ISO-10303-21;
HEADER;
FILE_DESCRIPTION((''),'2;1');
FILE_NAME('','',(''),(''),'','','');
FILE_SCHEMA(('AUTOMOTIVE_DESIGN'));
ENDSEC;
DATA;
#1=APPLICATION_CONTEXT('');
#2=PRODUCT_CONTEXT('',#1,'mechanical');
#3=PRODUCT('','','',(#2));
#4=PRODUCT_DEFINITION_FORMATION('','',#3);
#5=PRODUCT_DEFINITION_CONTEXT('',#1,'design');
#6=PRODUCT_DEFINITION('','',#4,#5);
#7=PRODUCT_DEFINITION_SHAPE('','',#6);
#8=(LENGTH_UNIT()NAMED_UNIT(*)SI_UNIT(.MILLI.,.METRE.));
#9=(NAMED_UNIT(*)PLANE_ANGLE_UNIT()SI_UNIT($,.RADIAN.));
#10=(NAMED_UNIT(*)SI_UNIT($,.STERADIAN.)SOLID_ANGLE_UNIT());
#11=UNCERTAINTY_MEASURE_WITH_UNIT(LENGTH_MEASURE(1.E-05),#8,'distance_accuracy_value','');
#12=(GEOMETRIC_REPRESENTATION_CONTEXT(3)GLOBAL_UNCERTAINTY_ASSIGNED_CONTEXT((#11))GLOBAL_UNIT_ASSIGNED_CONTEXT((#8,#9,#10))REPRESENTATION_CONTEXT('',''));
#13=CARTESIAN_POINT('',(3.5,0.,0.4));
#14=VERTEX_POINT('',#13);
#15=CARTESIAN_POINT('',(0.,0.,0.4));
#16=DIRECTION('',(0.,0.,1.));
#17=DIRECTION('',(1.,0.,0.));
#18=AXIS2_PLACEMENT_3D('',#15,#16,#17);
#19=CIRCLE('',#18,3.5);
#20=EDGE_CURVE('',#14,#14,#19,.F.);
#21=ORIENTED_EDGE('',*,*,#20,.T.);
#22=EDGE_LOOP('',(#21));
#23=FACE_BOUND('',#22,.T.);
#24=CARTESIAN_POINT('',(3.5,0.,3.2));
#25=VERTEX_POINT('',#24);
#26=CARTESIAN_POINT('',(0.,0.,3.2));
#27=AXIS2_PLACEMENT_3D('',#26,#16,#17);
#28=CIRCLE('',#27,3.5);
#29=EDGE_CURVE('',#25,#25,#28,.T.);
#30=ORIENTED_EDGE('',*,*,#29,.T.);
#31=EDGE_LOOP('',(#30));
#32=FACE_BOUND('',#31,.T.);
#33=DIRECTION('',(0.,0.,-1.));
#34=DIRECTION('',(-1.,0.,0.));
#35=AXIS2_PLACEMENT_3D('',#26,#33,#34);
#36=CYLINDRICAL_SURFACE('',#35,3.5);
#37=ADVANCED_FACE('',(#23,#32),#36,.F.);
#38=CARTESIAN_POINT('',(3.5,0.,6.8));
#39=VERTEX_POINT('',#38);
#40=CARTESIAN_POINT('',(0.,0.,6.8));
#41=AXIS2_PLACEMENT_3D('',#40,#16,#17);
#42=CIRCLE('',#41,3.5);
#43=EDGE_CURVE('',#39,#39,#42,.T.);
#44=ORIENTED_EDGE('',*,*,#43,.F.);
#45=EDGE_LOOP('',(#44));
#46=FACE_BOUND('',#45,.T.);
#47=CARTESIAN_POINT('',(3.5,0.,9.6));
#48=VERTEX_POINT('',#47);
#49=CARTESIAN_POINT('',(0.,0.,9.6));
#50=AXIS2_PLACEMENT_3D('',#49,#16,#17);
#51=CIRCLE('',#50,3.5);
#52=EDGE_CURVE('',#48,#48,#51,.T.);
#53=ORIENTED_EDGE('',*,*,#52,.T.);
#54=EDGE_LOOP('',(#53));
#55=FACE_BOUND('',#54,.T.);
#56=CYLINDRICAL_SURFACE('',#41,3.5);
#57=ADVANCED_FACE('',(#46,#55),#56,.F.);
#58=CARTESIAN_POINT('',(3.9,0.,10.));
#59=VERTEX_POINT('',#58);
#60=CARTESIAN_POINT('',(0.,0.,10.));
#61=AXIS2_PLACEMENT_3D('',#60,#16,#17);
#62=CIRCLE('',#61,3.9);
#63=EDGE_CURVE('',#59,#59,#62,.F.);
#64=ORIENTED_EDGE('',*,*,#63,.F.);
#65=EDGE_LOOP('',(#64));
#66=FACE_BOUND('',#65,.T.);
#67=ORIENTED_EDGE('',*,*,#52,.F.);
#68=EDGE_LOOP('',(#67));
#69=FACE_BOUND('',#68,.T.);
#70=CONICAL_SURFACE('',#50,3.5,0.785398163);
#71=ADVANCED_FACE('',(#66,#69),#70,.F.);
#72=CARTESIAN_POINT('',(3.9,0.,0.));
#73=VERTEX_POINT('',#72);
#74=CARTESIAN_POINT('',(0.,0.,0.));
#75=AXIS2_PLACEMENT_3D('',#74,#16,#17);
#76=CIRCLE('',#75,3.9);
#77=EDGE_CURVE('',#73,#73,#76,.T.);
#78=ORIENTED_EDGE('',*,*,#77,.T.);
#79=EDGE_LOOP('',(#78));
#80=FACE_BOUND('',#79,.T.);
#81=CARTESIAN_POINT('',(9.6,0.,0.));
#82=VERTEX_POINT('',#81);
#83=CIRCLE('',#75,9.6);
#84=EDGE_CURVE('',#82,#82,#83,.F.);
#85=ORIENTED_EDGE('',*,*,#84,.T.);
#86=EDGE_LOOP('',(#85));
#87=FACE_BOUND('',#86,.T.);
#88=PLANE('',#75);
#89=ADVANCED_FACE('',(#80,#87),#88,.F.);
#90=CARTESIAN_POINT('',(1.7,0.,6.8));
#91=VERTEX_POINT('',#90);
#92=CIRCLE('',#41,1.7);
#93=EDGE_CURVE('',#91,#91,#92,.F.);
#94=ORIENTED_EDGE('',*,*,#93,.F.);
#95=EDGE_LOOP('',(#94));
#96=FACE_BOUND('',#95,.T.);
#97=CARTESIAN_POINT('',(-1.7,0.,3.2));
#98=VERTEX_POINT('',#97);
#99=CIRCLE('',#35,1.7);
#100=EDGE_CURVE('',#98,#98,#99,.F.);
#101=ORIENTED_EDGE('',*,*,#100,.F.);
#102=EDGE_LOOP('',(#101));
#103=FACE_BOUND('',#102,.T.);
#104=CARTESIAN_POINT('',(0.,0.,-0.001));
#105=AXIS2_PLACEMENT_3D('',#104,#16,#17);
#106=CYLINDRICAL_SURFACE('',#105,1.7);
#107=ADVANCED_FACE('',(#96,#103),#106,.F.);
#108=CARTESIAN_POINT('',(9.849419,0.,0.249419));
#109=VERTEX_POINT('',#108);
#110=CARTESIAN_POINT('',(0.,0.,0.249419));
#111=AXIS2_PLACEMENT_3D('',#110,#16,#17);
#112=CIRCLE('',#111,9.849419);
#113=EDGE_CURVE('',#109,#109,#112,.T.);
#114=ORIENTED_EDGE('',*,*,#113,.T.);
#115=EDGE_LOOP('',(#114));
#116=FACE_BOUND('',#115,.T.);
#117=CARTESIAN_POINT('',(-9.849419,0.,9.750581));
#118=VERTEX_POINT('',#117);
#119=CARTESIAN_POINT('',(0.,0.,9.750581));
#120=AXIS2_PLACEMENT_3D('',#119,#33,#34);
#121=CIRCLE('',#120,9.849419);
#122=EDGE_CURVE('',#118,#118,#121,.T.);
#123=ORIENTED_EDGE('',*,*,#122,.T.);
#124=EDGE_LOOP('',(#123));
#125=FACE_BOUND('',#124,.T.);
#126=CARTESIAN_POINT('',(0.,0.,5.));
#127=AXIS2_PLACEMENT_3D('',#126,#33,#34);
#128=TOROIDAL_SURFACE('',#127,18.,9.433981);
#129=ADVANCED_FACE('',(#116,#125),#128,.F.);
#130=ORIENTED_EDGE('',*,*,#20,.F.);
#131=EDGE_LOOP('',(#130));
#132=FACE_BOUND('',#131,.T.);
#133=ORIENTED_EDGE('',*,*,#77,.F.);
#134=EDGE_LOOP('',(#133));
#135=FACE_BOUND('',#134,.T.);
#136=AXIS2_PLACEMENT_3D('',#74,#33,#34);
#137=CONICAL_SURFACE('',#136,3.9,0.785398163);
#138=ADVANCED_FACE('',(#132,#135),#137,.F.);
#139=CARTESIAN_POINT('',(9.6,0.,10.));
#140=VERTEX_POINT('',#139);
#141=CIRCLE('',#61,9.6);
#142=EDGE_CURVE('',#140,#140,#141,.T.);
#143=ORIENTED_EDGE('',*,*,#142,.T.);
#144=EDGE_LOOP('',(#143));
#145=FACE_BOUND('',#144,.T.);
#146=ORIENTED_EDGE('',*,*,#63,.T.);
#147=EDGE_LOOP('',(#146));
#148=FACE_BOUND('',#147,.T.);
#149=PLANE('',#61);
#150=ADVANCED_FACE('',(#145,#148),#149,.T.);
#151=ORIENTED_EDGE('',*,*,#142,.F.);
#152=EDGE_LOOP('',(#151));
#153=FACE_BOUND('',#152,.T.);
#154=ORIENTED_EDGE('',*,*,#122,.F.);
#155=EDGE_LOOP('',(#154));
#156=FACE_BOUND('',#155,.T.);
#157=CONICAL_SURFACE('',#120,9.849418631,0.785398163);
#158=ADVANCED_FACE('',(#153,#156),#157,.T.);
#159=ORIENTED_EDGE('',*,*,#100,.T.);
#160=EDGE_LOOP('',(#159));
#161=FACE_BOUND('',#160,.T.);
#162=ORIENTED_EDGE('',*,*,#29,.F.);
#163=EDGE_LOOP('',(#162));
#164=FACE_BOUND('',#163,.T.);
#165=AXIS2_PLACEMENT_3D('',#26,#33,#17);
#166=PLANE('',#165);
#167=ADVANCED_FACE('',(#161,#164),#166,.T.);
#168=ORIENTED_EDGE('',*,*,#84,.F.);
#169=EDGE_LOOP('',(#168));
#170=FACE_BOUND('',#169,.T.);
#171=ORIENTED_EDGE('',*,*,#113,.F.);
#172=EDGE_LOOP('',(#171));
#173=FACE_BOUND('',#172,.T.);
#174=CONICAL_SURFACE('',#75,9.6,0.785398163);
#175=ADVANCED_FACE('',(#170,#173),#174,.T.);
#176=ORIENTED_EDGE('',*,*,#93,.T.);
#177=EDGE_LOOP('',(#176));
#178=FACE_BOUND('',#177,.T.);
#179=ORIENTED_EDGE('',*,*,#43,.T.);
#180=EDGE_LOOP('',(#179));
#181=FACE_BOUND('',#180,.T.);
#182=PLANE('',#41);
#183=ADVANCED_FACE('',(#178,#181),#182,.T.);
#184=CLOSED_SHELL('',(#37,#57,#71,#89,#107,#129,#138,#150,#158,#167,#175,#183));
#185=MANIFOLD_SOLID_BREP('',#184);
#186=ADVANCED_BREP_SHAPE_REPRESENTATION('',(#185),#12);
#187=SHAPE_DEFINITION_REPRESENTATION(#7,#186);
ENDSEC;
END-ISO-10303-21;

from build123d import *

# Parameters (mm, degrees)
SKETCH1_R           = 10
BOSS_EXTRUDE1_DEPTH = 10
CUT_EXTRUDE1_REACH  = 19.321
SKETCH2_R           = 1.7
SKETCH3_R           = 3.5
CUT_EXTRUDE2_DEPTH  = 3.2
CHAMFER1_SIZE       = 0.4
CHAMFER2_SIZE       = 0.4


with BuildPart() as part:
    # Sketch1 → Boss-Extrude1 (new body)
    with BuildSketch(Plane.XY):
        Circle(SKETCH1_R)
    extrude(amount=BOSS_EXTRUDE1_DEPTH)

    # Sketch2 → Cut-Extrude1 (cut, up to next)
    with BuildSketch(Plane.XY.offset(10), mode=Mode.PRIVATE) as cut_extrude1_sk1:
        Circle(SKETCH2_R)
    cut_extrude1_tool1 = extrude(cut_extrude1_sk1.sketch, amount=-CUT_EXTRUDE1_REACH, mode=Mode.PRIVATE) & part.part
    add(cut_extrude1_tool1.solids().sort_by_distance((0, 0, 10))[0], mode=Mode.SUBTRACT)

    # Sketch3 → Cut-Extrude2 (cut)
    with BuildSketch(Plane.XY.offset(10)):
        Circle(SKETCH3_R)
    cut_extrude2 = extrude(amount=-CUT_EXTRUDE2_DEPTH, mode=Mode.SUBTRACT)

    # Mirror1: Cut-Extrude2 across plane
    add(cut_extrude2.mirror(Plane.XY.offset(5)), mode=Mode.SUBTRACT)

    # Sketch4 → Cut-Revolve1 (revolve, cut)
    with BuildSketch(Plane(origin=(0, 0, 0), x_dir=(1, 0, 0), z_dir=(0, 1, 0)), mode=Mode.PRIVATE) as cut_revolve1_sk:
        with BuildLine():
            Line((10, -10), (10, 0))
            ThreePointArc((10, 0), (8.566018868, -5), (10, -10))
        make_face()
    revolve(cut_revolve1_sk.sketch.rotate(Axis((0, 0, 3.2), (0, 0, 1)), 180), axis=Axis((0, 0, 3.2), (0, 0, 1)), mode=Mode.SUBTRACT)

    # Chamfer1
    # the kernel refuses this chamfer: 0.4, 0.290276343 mm, written as the material it takes off along each edge
    with BuildSketch(Plane(origin=(0, 0, 10), x_dir=(1, 0, 0), z_dir=(0, -1, 0))) as chamfer1_piece_1:
        Polygon((3.5, -CHAMFER1_SIZE), (3.5 + CHAMFER1_SIZE, 0), (3.5, 0), align=None)
    revolve(axis=Axis((0, 0, 10), (0, 0, 1)), mode=Mode.SUBTRACT)
    with BuildSketch(Plane(origin=(0, 0, 0), x_dir=(1, 0, 0), z_dir=(0, -1, 0))) as chamfer1_piece_2:
        Polygon((3.5 + CHAMFER1_SIZE, 0), (3.5, CHAMFER1_SIZE), (3.5, 0), align=None)
    revolve(axis=Axis((0, 0, 0), (0, 0, 1)), mode=Mode.SUBTRACT)
    with BuildSketch(Plane(origin=(0, 0, 10), x_dir=(-1, 0, 0), z_dir=(0, -1, 0))) as chamfer1_piece_3:
        with BuildLine():
            Line((10 - CHAMFER1_SIZE, 0), (9.849418631, 0.249418631))
            ThreePointArc((9.849418631, 0.249418631), (9.922753807, 0.125772477), (10, 0))
            Line((10, 0), (10 - CHAMFER1_SIZE, 0))
        make_face()
    revolve(axis=Axis((0, 0, 10), (0, 0, -1)), mode=Mode.SUBTRACT)

    # Chamfer2
    # the kernel refuses this chamfer: 0.4, 0.290276343 mm, written as the material it takes off along each edge
    with BuildSketch(Plane(origin=(0, 0, 0), x_dir=(-1, 0, 0), z_dir=(0, -1, 0))) as chamfer2_piece_1:
        with BuildLine():
            Line((10 - CHAMFER2_SIZE, 0), (9.849418631, -0.249418631))
            ThreePointArc((9.849418631, -0.249418631), (9.922753807, -0.125772477), (10, 0))
            Line((10, 0), (10 - CHAMFER2_SIZE, 0))
        make_face()
    revolve(axis=Axis((0, 0, 0), (0, 0, -1)), mode=Mode.SUBTRACT)


solid = part.part
